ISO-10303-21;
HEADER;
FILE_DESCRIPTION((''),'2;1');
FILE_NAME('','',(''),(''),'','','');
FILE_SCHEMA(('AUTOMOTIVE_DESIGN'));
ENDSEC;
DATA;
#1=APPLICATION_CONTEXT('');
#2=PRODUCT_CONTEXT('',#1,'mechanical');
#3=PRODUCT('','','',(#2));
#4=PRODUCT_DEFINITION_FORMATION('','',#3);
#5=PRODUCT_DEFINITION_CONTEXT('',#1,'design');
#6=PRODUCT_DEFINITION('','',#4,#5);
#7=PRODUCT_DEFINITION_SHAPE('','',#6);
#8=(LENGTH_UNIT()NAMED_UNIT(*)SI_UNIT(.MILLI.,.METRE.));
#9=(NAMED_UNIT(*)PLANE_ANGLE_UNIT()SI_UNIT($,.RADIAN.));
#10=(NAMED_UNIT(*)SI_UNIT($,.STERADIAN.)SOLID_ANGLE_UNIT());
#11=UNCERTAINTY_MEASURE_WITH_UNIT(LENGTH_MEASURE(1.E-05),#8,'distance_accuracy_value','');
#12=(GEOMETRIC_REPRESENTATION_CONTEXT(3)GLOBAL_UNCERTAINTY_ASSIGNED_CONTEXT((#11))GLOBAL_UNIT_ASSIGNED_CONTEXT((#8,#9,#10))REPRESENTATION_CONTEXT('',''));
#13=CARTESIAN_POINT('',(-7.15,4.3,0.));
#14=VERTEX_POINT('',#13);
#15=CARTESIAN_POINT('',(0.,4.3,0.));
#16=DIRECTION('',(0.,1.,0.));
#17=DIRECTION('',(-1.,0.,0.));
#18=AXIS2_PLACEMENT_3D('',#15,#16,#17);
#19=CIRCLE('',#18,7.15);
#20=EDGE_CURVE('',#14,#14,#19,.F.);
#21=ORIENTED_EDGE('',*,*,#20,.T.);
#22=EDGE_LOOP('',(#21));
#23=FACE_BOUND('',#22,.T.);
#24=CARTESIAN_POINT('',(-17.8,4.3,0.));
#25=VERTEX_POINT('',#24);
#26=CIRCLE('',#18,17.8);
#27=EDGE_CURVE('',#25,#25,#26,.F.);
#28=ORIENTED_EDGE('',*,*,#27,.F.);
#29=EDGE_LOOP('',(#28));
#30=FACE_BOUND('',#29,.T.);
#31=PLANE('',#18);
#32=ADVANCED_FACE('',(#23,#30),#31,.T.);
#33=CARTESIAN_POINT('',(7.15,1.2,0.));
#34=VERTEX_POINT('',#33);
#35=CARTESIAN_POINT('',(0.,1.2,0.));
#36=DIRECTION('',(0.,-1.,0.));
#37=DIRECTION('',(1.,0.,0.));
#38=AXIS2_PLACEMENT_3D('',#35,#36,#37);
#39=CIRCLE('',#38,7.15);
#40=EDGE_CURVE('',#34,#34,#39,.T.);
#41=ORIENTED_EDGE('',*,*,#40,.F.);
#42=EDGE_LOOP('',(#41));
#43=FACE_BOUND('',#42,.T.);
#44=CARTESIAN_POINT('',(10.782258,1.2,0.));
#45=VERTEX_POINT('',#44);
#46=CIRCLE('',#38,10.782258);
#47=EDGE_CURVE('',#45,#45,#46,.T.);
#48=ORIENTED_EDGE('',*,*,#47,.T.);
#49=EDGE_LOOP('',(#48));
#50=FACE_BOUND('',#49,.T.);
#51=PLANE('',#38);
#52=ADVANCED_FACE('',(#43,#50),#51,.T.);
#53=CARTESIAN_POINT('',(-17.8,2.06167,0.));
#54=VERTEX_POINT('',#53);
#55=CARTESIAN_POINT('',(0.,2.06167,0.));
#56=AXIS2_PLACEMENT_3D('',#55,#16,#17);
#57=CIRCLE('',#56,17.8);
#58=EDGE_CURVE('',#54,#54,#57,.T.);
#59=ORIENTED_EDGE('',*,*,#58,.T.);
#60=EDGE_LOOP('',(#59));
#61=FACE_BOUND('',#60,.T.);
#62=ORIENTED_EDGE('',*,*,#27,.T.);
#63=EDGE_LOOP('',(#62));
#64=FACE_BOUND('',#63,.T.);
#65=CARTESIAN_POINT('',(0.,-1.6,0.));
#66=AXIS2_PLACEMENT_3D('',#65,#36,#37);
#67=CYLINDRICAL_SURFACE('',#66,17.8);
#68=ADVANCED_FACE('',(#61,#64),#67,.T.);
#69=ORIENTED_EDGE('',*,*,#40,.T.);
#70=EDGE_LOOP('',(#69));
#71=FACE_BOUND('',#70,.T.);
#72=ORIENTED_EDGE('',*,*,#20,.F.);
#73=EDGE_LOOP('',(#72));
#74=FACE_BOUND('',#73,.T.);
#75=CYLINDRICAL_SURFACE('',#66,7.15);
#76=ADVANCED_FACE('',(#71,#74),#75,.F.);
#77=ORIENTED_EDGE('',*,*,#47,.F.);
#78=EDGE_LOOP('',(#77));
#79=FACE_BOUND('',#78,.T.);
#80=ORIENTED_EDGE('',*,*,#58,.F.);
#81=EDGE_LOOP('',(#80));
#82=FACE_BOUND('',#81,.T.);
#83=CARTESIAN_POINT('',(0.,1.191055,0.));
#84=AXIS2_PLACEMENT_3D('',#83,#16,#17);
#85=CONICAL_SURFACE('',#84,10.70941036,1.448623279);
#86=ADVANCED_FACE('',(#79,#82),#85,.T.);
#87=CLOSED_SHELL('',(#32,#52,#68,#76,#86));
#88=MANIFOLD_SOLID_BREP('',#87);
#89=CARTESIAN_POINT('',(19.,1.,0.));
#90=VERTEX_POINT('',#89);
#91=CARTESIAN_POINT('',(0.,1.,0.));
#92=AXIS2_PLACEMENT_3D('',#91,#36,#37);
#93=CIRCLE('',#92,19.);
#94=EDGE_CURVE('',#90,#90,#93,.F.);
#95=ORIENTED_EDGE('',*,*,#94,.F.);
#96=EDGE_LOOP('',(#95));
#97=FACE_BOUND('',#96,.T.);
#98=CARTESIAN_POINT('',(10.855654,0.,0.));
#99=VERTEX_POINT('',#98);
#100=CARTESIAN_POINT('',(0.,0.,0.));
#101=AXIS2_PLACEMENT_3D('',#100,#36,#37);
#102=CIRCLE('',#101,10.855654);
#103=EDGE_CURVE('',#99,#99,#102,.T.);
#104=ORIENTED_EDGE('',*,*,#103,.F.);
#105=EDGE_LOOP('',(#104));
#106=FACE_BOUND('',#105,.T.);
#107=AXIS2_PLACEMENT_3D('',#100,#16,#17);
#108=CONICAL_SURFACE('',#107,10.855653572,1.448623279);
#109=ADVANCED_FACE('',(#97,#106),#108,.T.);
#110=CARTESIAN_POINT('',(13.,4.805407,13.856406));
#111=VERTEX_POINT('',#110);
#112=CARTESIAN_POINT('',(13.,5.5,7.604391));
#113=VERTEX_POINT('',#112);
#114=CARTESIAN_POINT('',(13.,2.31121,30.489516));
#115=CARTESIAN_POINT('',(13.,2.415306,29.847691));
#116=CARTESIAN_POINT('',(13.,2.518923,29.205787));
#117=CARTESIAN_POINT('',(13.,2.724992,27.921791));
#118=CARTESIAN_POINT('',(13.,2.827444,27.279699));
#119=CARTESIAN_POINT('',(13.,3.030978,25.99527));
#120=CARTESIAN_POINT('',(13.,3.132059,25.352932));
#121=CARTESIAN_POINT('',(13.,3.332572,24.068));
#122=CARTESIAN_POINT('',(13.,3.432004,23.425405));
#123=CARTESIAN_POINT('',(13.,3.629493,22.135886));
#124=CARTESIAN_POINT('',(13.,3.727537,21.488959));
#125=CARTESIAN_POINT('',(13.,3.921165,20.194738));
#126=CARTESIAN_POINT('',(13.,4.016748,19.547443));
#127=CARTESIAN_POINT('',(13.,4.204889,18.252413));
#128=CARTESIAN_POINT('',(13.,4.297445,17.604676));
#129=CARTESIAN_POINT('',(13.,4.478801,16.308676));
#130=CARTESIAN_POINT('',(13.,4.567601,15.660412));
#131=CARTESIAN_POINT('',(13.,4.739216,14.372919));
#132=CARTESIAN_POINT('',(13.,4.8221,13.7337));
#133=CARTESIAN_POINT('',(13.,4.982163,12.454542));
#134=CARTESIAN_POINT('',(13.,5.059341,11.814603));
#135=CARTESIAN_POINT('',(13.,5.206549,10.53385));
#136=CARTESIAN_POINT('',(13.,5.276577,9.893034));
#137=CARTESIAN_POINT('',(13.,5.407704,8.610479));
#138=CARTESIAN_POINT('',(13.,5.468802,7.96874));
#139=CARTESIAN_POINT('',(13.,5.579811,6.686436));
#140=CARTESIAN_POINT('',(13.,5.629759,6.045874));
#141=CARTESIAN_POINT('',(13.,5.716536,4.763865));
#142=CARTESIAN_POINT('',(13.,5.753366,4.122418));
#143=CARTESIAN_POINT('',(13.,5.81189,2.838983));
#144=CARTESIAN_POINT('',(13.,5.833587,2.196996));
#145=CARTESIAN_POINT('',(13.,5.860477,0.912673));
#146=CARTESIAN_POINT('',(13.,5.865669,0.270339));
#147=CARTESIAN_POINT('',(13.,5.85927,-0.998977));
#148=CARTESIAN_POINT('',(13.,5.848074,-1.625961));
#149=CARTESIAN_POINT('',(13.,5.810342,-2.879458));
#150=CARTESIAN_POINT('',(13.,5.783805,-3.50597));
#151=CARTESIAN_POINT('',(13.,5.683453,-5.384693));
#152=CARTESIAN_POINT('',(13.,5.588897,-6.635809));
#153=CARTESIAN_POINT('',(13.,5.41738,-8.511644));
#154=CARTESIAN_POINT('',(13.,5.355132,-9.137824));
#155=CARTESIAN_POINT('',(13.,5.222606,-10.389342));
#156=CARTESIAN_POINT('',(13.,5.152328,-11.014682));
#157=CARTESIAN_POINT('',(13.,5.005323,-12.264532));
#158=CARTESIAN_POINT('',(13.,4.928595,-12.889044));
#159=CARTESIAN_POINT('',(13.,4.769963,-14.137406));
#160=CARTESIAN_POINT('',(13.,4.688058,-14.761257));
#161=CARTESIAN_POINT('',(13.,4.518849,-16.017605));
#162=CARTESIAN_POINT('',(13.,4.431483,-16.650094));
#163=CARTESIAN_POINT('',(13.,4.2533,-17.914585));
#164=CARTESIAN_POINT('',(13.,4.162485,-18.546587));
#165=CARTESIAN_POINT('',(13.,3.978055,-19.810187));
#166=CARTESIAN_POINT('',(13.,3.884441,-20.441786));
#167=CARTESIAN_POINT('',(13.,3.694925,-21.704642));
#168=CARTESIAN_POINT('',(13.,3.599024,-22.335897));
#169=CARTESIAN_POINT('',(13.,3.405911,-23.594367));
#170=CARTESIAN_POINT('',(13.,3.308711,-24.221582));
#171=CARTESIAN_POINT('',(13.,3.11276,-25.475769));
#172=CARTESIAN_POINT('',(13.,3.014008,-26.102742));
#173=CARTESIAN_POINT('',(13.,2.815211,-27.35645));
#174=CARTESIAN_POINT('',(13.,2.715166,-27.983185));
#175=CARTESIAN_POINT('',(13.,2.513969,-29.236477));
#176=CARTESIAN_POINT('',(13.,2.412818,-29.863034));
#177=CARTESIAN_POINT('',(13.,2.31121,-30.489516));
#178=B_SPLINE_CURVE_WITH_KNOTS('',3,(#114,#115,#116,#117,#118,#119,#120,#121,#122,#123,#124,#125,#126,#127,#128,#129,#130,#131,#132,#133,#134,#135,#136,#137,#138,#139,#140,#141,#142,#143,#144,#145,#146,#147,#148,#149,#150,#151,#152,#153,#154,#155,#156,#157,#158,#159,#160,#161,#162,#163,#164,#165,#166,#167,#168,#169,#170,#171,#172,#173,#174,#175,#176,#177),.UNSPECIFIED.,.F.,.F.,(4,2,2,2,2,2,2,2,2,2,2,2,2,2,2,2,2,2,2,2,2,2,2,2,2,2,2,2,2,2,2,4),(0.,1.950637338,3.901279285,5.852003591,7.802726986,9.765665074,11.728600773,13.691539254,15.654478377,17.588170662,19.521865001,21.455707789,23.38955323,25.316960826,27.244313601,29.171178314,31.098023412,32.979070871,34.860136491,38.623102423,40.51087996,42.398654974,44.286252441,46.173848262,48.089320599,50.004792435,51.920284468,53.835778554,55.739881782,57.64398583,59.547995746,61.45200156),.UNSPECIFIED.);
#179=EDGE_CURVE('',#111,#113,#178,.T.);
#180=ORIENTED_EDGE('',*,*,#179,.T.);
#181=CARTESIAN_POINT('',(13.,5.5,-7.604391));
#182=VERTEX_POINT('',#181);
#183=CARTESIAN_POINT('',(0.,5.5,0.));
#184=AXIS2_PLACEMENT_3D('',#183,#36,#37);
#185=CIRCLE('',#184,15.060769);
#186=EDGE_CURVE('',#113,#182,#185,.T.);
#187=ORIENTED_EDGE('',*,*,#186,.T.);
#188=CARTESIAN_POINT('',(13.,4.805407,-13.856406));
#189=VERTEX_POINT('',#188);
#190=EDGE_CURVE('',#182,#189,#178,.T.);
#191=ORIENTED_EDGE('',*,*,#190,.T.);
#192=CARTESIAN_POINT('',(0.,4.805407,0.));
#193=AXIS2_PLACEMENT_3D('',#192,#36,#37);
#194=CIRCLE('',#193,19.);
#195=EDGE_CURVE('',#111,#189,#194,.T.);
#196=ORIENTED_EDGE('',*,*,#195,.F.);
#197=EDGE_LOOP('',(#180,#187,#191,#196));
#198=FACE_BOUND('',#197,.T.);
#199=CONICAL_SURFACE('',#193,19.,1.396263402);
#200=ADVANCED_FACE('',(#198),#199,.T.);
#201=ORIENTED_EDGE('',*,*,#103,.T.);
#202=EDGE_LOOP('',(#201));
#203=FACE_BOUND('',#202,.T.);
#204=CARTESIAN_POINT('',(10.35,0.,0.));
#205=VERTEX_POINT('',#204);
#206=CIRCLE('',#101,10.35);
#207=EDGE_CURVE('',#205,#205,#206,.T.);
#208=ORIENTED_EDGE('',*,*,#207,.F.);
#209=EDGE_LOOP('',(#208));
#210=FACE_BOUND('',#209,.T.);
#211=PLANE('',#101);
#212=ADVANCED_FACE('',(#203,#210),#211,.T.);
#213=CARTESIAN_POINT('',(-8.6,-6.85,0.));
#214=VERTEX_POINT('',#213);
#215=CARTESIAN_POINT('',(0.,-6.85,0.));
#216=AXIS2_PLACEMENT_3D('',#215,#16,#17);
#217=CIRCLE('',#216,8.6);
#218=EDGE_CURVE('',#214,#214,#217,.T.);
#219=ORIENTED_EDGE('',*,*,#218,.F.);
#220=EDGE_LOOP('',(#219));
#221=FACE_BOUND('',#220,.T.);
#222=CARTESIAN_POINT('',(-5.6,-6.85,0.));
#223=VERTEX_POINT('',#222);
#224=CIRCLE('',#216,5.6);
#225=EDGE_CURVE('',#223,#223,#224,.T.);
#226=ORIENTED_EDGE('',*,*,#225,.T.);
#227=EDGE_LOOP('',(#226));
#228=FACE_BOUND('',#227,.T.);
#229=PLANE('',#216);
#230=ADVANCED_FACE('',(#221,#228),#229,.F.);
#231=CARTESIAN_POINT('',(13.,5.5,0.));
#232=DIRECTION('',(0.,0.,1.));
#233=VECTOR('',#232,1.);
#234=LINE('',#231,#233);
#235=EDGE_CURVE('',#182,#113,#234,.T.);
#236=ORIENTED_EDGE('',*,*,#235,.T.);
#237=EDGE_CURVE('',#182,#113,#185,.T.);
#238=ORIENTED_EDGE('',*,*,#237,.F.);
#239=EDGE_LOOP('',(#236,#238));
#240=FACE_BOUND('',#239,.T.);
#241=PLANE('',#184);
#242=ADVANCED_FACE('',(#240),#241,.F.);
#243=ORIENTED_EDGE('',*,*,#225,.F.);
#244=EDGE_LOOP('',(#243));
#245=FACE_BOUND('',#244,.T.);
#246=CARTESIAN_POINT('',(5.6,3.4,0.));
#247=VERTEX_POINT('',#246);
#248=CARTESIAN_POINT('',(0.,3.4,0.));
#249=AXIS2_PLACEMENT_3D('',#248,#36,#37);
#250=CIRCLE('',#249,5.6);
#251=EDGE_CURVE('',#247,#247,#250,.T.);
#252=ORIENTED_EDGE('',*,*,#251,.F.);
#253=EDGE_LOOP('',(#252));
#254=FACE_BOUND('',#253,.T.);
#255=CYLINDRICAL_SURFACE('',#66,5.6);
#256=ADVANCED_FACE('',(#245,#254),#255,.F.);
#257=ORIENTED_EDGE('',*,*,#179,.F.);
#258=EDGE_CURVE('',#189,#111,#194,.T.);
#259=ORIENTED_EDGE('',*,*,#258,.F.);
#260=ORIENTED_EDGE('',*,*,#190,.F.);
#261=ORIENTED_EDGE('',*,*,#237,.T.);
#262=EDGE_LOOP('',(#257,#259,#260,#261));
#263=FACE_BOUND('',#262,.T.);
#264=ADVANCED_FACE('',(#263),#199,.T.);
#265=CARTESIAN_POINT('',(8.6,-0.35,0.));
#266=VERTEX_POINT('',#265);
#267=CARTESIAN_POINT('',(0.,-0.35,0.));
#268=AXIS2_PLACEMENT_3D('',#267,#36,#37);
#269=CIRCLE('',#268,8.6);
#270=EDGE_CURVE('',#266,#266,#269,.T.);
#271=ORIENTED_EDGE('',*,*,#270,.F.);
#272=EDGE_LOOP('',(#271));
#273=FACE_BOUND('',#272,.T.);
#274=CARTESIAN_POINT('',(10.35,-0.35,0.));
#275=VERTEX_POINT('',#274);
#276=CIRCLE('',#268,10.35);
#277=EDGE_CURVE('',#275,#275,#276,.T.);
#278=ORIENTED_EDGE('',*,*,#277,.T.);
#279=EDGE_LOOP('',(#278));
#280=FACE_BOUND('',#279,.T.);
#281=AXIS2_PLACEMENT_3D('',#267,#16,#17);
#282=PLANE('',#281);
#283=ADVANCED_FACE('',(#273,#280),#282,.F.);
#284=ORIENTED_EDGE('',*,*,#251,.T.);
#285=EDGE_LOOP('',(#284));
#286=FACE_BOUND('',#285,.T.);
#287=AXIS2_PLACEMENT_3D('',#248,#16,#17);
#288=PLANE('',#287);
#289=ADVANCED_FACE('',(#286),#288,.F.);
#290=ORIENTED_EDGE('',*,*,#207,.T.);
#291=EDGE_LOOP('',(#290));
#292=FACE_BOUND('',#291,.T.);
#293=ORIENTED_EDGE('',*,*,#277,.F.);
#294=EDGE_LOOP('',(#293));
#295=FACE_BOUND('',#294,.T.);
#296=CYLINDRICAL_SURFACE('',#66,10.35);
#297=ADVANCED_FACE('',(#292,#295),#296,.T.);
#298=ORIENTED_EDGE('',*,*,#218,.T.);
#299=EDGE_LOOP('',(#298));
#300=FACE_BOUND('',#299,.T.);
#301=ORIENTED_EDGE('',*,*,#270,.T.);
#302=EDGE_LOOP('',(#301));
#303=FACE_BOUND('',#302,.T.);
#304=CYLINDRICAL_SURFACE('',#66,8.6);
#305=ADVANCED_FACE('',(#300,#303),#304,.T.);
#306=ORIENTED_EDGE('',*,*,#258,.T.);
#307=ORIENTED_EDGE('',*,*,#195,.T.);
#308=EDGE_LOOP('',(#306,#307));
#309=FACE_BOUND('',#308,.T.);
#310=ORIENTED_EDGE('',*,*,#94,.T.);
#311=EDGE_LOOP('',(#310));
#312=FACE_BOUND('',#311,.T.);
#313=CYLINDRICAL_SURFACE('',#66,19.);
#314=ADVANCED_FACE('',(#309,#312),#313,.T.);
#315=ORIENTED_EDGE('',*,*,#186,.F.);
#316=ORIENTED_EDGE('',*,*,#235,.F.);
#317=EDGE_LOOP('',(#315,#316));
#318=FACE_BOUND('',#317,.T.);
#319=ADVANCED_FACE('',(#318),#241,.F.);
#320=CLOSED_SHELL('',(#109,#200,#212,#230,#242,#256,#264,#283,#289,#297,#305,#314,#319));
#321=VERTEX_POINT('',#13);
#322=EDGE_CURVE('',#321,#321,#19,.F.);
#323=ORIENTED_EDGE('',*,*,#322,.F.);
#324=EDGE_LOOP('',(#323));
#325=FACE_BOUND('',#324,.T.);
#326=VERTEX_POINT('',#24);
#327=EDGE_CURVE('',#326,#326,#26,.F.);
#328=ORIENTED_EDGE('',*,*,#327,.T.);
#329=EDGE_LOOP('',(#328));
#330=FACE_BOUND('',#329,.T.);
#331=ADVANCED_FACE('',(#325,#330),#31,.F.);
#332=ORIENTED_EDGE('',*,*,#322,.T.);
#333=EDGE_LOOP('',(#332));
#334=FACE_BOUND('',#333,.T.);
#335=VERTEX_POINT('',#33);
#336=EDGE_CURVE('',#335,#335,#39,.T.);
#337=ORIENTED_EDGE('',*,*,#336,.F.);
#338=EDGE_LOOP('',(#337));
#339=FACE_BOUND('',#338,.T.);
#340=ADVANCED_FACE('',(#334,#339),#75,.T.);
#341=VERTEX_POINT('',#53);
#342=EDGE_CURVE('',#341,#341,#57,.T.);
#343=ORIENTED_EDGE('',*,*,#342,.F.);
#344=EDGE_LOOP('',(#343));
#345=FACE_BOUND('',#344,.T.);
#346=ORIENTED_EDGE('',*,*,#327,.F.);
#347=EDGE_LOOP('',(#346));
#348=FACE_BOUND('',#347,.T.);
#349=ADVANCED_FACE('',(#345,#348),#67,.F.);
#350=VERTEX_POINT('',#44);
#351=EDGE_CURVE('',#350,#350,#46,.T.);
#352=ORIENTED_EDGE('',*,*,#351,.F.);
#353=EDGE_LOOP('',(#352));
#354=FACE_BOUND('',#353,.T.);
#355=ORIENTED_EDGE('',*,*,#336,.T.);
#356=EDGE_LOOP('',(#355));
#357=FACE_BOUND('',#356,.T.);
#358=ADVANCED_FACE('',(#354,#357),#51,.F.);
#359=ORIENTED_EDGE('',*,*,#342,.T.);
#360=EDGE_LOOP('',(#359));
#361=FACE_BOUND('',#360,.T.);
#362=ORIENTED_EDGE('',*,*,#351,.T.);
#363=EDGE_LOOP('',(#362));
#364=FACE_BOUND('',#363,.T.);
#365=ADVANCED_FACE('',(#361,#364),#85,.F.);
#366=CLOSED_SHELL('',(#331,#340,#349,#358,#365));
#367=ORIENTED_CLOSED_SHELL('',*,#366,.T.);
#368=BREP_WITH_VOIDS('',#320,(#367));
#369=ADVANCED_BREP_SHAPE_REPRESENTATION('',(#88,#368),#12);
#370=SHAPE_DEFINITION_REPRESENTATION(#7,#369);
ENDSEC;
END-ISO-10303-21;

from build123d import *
from build123d.topology import SkipClean

# Parameters (mm, degrees)
CHAMFER2_SIZE           = 1
CHAMFER2_SIZE2          = 8.144346428
CUT_EXTRUDE1_DEPTH      = 28.792265111
CUT_EXTRUDE1_DEPTH_BACK = 5
CHAMFER1_SIZE           = 1
CHAMFER3_SIZE           = 0.5
CHAMFER3_SIZE2          = 0.288675135
SKETCH6_R               = 8.6
SKETCH6_R_2             = 5.6
BOSS_EXTRUDE1_DEPTH     = 10.25
CUT_EXTRUDE3_START      = 5
SKETCH7_R               = 3
CUT_EXTRUDE3_DEPTH      = 5
SHELL6_2_OUTLINE_W      = 7.15
SHELL6_2_OUTLINE_H      = 0.3
SKETCH9_R               = 9.15
SKETCH9_R_2             = 7.15
BOSS_EXTRUDE3_DEPTH     = 0.35


with BuildPart() as part:
    # Sketch1 → Revolve1 (revolve)
    with BuildSketch(Plane.XY, mode=Mode.PRIVATE) as revolve1_sk:
        Polygon((-15.060768988, 5.5), (-19, 4.805407289), (-19, 0), (-10.35, 0), (-10.35, -0.35), (-8.6, -0.35), (-8.6, -6.85), (-5.6, -6.85), (-5.6, 3.4), (-3, 3.4), (-3, -1.6), (0, -1.6), (0, 5.5), align=None)
    revolve(revolve1_sk.sketch.rotate(Axis((0, -1.6, 0), (0, 1, 0)), 180), axis=Axis((0, -1.6, 0), (0, 1, 0)))

    # Chamfer2
    chamfer2_edges = [part.edges().sort_by_distance(p)[0] for p in [
        (-19, 0, 0),
    ]]
    chamfer2_side = [part.faces().sort_by_distance(p)[0] for p in [
        (-19, 2.402703645, 0),
    ]]
    chamfer(chamfer2_edges, length=CHAMFER2_SIZE, length2=CHAMFER2_SIZE2, reference=chamfer2_side[0])

    # Sketch2 → Cut-Extrude1 (cut, two sides: drawn at the far end of the back side and taken through both)
    with BuildSketch(Plane.XZ.offset(1.6).offset(-CUT_EXTRUDE1_DEPTH_BACK)):
        Polygon((-5.85, 1.85), (-6.6, 1.1), (-6.6, -1.1), (-5.85, -1.85), (-0.35, -1.85), (0.4, -1.1), (0.4, 1.1), (-0.35, 1.85), align=None)
    extrude(amount=CUT_EXTRUDE1_DEPTH + CUT_EXTRUDE1_DEPTH_BACK, mode=Mode.SUBTRACT)

    # Chamfer1
    chamfer1_edges = [part.edges().sort_by_distance(p)[0] for p in [
        (5.6, -6.85, 0),
    ]]
    chamfer(chamfer1_edges, length=CHAMFER1_SIZE)

    # Chamfer3
    chamfer3_edges = [part.edges().sort_by_distance(p)[0] for p in [
        (-8.6, -6.85, 0),
    ]]
    chamfer3_side = [part.faces().sort_by_distance(p)[0] for p in [
        (-8.6, -3.6, 0),
    ]]
    chamfer(chamfer3_edges, length=CHAMFER3_SIZE, length2=CHAMFER3_SIZE2, reference=chamfer3_side[0])

    # Sketch6 → Boss-Extrude1 (add)
    with SkipClean():  # the faces are left unmerged after this step: merging them gives an invalid solid
        with BuildSketch(Plane.XZ.offset(-3.4)):
            Circle(SKETCH6_R)
            Circle(SKETCH6_R_2, mode=Mode.SUBTRACT)
        extrude(amount=BOSS_EXTRUDE1_DEPTH)

    # Sketch7 → Cut-Extrude3 (cut)
    with SkipClean():  # the faces are left unmerged after this step: merging them gives an invalid solid
        with BuildSketch(Plane.XZ.offset(-3.4).offset(CUT_EXTRUDE3_START)):
            Circle(SKETCH7_R)
        extrude(amount=-CUT_EXTRUDE3_DEPTH, mode=Mode.SUBTRACT)


with BuildPart() as body_2:
    # Split1: the piece on the far side of the plane
    add(part.part)
    split(bisect_by=Plane(origin=(0, 4.3, 0), x_dir=(1, 0, 0), z_dir=(0, 1, 0)), keep=Keep.BOTTOM)

    # Shell6: read off the stored shape, not the designer's step
    # Shell6 outline → Shell6 (revolve, cut)
    with SkipClean():  # the faces are left unmerged after this step: merging them gives an invalid solid
        with BuildSketch(Plane.XY):
            Polygon((7.15, 4.3), (7.15, 0.85), (9.15, 0.85), (9.15, 1.2), (10.782258428, 1.2), (17.8, 2.061670317), (17.8, 4.3), align=None)
        revolve(axis=Axis((0, 0, 0), (0, 1, 0)), mode=Mode.SUBTRACT)

    # Shell6 2 outline → Shell6 2 (revolve)
    with SkipClean():  # the faces are left unmerged after this step: merging them gives an invalid solid
        with BuildSketch(Plane.XY):
            with Locations((3.575, 4.45)):
                Rectangle(SHELL6_2_OUTLINE_W, SHELL6_2_OUTLINE_H)
        revolve(axis=Axis((0, 0, 0), (0, 1, 0)))

    # Sketch9 → Boss-Extrude3 (add)
    with SkipClean():  # the faces are left unmerged after this step: merging them gives an invalid solid
        with BuildSketch(Plane(origin=(0, 0.85, 0), x_dir=(1, 0, 0), z_dir=(0, 1, 0))):
            Circle(SKETCH9_R)
            Circle(SKETCH9_R_2, mode=Mode.SUBTRACT)
        extrude(amount=BOSS_EXTRUDE3_DEPTH)


with BuildPart() as part_1:
    add(part.part)

    # Split1
    split(bisect_by=Plane(origin=(0, 4.3, 0), x_dir=(1, 0, 0), z_dir=(0, 1, 0)), keep=Keep.TOP)


with BuildPart() as body_3:
    # Intersect1: read off the stored shape, not the designer's step
    # Intersect1 outline → Intersect1 (revolve)
    with BuildSketch(Plane.XY):
        Polygon((17.8, 4.3), (7.15, 4.3), (7.15, 1.2), (10.782258428, 1.2), (17.8, 2.061670317), align=None)
    revolve(axis=Axis((0, 0, 0), (0, 1, 0)))


with BuildPart() as body_4:
    # Intersect1 2 outline → Intersect1 2 (revolve)
    with BuildSketch(Plane.XY):
        Polygon((7.15, 4.6), (7.15, 4.3), (19, 4.3), (19, 4.805407289), (15.060768988, 5.5), (0, 5.5), (0, 4.6), align=None)
    revolve(axis=Axis((0, 0, 0), (0, 1, 0)))

    # Combine1: union body 2
    add(body_2.part)


solid = Compound([body_3.part, body_4.part])
